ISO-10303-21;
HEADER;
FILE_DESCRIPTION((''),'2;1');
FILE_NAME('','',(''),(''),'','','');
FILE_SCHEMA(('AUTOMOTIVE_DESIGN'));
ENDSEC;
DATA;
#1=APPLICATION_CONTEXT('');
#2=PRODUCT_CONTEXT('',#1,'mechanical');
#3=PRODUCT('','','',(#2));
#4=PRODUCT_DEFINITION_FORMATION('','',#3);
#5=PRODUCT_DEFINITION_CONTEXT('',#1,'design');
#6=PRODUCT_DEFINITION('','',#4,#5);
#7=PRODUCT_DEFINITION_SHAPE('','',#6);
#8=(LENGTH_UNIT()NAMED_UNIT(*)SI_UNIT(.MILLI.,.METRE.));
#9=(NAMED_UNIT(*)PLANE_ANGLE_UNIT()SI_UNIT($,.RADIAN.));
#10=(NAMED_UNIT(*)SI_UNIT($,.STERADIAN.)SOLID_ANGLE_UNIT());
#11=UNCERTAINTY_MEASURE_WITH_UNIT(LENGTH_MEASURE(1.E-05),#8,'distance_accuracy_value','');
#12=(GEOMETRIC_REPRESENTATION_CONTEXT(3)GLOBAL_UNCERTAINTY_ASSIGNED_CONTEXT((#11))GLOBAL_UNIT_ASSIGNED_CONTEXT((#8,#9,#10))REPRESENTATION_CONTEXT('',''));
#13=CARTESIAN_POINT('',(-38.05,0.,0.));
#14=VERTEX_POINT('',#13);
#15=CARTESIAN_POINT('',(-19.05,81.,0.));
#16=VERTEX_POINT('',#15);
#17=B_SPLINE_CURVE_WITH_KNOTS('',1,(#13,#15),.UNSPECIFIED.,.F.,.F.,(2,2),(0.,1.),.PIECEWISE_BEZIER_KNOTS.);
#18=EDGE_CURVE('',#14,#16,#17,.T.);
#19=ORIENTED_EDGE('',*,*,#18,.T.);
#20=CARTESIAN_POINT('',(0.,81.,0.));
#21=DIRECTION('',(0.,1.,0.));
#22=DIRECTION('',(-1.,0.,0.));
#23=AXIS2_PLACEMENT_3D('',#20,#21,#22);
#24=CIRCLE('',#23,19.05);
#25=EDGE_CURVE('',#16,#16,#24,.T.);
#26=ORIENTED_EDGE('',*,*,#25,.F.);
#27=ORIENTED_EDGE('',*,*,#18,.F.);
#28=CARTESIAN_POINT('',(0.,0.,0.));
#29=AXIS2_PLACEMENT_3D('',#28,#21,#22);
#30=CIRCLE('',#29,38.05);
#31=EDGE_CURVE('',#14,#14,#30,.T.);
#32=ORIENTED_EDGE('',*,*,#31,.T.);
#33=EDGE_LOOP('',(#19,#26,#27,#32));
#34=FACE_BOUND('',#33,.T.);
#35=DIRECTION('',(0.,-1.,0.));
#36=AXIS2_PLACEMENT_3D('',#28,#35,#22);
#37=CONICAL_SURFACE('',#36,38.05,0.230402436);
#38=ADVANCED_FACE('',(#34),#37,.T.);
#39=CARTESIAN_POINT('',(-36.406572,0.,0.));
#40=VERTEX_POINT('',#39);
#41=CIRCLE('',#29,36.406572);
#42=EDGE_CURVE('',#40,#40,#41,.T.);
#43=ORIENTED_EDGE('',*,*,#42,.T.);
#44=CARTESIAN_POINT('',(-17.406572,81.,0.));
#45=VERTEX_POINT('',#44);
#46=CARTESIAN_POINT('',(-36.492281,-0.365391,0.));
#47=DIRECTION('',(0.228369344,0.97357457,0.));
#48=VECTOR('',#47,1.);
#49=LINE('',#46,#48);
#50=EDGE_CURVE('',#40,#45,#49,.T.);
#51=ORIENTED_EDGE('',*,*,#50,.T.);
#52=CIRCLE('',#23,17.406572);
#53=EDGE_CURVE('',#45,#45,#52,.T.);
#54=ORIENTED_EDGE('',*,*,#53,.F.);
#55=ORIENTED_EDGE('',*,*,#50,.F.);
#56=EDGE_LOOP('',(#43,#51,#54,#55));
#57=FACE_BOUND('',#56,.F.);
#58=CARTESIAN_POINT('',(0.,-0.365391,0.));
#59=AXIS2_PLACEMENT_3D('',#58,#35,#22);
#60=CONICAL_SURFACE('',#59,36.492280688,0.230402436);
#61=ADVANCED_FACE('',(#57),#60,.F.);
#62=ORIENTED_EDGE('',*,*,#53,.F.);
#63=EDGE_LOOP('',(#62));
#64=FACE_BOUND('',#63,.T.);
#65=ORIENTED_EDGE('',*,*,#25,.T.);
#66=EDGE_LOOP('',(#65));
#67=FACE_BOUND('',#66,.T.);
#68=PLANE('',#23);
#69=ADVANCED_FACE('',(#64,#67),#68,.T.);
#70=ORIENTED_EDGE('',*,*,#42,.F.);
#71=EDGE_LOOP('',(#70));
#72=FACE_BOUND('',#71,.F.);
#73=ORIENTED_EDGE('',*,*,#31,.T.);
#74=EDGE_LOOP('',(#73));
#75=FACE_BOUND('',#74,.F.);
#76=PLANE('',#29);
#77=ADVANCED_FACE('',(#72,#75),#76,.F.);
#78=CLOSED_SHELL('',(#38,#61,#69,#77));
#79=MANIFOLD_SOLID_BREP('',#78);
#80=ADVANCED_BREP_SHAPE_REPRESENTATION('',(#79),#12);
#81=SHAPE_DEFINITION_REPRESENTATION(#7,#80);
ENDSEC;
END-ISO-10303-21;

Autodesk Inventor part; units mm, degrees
ref_plane "YZ Plane" through (0, 0, 0) normal (1, 0, 0) x (0, 1, 0)
ref_plane "XY Plane" through (0, 0, 0) normal (0, 0, 1) x (1, 0, 0)
sketch "Szkic6" plane through (0, 0, 0) normal (0, 1, 0) x (-1, 0, 0)
  circle A0 centre (0, 0) radius 38.05
  dimension "d33" = 76.1
ref_plane "Płaszczyzna konstrukcyjna1" through (0, 81, 0) normal (0, 1, 0) x (-1, 0, 0)
sketch "Szkic7" plane through (0, 81, 0) normal (0, 1, 0) x (-1, 0, 0)
  circle A0 centre (0, 0) radius 19.05
  dimension "d35" = 38.1
loft "Wyciągnięcie złożone1" add profiles "Szkic6", "Szkic7"
shell "Skorupa1" thickness 1.6 removed faces 2 at (5.6226, 81, 0.0883) at (-5.8996, 0, 7.9079)
equation "\"d33\" = OD1"
equation "\"d35\" = OD2"
equation "\"d52\" = THK"
equation "\"SzerokośćGięciaPodcięcia\" = Grubość"
equation "\"RozmiarPodcięciaNarożnika\" = 4 * Grubość"
equation "\"PromieńPrzejścia\" = PromieńGięcia"
equation "\"Rozmiar_promienia_Jacobiego\" = PromieńGięcia"
equation "\"Wielk_odstępu\" = Grubość"
equation "\"d2\" = PromieńGięcia"
equation "\"d23\" = PromieńGięcia"
equation "\"OD1\" = 76.1"
equation "\"OD2\" = 38.1"
equation "\"L\" = 81"
equation "\"THK\" = 1.6"
equation "\"d34\" = L"
equation "\"Grubość\" = 1.5"
equation "\"PromieńGięcia\" = 3"
properties part number "Redukcja symetryczna Ø76,1x38,1x1,6 L=81" material "304"
